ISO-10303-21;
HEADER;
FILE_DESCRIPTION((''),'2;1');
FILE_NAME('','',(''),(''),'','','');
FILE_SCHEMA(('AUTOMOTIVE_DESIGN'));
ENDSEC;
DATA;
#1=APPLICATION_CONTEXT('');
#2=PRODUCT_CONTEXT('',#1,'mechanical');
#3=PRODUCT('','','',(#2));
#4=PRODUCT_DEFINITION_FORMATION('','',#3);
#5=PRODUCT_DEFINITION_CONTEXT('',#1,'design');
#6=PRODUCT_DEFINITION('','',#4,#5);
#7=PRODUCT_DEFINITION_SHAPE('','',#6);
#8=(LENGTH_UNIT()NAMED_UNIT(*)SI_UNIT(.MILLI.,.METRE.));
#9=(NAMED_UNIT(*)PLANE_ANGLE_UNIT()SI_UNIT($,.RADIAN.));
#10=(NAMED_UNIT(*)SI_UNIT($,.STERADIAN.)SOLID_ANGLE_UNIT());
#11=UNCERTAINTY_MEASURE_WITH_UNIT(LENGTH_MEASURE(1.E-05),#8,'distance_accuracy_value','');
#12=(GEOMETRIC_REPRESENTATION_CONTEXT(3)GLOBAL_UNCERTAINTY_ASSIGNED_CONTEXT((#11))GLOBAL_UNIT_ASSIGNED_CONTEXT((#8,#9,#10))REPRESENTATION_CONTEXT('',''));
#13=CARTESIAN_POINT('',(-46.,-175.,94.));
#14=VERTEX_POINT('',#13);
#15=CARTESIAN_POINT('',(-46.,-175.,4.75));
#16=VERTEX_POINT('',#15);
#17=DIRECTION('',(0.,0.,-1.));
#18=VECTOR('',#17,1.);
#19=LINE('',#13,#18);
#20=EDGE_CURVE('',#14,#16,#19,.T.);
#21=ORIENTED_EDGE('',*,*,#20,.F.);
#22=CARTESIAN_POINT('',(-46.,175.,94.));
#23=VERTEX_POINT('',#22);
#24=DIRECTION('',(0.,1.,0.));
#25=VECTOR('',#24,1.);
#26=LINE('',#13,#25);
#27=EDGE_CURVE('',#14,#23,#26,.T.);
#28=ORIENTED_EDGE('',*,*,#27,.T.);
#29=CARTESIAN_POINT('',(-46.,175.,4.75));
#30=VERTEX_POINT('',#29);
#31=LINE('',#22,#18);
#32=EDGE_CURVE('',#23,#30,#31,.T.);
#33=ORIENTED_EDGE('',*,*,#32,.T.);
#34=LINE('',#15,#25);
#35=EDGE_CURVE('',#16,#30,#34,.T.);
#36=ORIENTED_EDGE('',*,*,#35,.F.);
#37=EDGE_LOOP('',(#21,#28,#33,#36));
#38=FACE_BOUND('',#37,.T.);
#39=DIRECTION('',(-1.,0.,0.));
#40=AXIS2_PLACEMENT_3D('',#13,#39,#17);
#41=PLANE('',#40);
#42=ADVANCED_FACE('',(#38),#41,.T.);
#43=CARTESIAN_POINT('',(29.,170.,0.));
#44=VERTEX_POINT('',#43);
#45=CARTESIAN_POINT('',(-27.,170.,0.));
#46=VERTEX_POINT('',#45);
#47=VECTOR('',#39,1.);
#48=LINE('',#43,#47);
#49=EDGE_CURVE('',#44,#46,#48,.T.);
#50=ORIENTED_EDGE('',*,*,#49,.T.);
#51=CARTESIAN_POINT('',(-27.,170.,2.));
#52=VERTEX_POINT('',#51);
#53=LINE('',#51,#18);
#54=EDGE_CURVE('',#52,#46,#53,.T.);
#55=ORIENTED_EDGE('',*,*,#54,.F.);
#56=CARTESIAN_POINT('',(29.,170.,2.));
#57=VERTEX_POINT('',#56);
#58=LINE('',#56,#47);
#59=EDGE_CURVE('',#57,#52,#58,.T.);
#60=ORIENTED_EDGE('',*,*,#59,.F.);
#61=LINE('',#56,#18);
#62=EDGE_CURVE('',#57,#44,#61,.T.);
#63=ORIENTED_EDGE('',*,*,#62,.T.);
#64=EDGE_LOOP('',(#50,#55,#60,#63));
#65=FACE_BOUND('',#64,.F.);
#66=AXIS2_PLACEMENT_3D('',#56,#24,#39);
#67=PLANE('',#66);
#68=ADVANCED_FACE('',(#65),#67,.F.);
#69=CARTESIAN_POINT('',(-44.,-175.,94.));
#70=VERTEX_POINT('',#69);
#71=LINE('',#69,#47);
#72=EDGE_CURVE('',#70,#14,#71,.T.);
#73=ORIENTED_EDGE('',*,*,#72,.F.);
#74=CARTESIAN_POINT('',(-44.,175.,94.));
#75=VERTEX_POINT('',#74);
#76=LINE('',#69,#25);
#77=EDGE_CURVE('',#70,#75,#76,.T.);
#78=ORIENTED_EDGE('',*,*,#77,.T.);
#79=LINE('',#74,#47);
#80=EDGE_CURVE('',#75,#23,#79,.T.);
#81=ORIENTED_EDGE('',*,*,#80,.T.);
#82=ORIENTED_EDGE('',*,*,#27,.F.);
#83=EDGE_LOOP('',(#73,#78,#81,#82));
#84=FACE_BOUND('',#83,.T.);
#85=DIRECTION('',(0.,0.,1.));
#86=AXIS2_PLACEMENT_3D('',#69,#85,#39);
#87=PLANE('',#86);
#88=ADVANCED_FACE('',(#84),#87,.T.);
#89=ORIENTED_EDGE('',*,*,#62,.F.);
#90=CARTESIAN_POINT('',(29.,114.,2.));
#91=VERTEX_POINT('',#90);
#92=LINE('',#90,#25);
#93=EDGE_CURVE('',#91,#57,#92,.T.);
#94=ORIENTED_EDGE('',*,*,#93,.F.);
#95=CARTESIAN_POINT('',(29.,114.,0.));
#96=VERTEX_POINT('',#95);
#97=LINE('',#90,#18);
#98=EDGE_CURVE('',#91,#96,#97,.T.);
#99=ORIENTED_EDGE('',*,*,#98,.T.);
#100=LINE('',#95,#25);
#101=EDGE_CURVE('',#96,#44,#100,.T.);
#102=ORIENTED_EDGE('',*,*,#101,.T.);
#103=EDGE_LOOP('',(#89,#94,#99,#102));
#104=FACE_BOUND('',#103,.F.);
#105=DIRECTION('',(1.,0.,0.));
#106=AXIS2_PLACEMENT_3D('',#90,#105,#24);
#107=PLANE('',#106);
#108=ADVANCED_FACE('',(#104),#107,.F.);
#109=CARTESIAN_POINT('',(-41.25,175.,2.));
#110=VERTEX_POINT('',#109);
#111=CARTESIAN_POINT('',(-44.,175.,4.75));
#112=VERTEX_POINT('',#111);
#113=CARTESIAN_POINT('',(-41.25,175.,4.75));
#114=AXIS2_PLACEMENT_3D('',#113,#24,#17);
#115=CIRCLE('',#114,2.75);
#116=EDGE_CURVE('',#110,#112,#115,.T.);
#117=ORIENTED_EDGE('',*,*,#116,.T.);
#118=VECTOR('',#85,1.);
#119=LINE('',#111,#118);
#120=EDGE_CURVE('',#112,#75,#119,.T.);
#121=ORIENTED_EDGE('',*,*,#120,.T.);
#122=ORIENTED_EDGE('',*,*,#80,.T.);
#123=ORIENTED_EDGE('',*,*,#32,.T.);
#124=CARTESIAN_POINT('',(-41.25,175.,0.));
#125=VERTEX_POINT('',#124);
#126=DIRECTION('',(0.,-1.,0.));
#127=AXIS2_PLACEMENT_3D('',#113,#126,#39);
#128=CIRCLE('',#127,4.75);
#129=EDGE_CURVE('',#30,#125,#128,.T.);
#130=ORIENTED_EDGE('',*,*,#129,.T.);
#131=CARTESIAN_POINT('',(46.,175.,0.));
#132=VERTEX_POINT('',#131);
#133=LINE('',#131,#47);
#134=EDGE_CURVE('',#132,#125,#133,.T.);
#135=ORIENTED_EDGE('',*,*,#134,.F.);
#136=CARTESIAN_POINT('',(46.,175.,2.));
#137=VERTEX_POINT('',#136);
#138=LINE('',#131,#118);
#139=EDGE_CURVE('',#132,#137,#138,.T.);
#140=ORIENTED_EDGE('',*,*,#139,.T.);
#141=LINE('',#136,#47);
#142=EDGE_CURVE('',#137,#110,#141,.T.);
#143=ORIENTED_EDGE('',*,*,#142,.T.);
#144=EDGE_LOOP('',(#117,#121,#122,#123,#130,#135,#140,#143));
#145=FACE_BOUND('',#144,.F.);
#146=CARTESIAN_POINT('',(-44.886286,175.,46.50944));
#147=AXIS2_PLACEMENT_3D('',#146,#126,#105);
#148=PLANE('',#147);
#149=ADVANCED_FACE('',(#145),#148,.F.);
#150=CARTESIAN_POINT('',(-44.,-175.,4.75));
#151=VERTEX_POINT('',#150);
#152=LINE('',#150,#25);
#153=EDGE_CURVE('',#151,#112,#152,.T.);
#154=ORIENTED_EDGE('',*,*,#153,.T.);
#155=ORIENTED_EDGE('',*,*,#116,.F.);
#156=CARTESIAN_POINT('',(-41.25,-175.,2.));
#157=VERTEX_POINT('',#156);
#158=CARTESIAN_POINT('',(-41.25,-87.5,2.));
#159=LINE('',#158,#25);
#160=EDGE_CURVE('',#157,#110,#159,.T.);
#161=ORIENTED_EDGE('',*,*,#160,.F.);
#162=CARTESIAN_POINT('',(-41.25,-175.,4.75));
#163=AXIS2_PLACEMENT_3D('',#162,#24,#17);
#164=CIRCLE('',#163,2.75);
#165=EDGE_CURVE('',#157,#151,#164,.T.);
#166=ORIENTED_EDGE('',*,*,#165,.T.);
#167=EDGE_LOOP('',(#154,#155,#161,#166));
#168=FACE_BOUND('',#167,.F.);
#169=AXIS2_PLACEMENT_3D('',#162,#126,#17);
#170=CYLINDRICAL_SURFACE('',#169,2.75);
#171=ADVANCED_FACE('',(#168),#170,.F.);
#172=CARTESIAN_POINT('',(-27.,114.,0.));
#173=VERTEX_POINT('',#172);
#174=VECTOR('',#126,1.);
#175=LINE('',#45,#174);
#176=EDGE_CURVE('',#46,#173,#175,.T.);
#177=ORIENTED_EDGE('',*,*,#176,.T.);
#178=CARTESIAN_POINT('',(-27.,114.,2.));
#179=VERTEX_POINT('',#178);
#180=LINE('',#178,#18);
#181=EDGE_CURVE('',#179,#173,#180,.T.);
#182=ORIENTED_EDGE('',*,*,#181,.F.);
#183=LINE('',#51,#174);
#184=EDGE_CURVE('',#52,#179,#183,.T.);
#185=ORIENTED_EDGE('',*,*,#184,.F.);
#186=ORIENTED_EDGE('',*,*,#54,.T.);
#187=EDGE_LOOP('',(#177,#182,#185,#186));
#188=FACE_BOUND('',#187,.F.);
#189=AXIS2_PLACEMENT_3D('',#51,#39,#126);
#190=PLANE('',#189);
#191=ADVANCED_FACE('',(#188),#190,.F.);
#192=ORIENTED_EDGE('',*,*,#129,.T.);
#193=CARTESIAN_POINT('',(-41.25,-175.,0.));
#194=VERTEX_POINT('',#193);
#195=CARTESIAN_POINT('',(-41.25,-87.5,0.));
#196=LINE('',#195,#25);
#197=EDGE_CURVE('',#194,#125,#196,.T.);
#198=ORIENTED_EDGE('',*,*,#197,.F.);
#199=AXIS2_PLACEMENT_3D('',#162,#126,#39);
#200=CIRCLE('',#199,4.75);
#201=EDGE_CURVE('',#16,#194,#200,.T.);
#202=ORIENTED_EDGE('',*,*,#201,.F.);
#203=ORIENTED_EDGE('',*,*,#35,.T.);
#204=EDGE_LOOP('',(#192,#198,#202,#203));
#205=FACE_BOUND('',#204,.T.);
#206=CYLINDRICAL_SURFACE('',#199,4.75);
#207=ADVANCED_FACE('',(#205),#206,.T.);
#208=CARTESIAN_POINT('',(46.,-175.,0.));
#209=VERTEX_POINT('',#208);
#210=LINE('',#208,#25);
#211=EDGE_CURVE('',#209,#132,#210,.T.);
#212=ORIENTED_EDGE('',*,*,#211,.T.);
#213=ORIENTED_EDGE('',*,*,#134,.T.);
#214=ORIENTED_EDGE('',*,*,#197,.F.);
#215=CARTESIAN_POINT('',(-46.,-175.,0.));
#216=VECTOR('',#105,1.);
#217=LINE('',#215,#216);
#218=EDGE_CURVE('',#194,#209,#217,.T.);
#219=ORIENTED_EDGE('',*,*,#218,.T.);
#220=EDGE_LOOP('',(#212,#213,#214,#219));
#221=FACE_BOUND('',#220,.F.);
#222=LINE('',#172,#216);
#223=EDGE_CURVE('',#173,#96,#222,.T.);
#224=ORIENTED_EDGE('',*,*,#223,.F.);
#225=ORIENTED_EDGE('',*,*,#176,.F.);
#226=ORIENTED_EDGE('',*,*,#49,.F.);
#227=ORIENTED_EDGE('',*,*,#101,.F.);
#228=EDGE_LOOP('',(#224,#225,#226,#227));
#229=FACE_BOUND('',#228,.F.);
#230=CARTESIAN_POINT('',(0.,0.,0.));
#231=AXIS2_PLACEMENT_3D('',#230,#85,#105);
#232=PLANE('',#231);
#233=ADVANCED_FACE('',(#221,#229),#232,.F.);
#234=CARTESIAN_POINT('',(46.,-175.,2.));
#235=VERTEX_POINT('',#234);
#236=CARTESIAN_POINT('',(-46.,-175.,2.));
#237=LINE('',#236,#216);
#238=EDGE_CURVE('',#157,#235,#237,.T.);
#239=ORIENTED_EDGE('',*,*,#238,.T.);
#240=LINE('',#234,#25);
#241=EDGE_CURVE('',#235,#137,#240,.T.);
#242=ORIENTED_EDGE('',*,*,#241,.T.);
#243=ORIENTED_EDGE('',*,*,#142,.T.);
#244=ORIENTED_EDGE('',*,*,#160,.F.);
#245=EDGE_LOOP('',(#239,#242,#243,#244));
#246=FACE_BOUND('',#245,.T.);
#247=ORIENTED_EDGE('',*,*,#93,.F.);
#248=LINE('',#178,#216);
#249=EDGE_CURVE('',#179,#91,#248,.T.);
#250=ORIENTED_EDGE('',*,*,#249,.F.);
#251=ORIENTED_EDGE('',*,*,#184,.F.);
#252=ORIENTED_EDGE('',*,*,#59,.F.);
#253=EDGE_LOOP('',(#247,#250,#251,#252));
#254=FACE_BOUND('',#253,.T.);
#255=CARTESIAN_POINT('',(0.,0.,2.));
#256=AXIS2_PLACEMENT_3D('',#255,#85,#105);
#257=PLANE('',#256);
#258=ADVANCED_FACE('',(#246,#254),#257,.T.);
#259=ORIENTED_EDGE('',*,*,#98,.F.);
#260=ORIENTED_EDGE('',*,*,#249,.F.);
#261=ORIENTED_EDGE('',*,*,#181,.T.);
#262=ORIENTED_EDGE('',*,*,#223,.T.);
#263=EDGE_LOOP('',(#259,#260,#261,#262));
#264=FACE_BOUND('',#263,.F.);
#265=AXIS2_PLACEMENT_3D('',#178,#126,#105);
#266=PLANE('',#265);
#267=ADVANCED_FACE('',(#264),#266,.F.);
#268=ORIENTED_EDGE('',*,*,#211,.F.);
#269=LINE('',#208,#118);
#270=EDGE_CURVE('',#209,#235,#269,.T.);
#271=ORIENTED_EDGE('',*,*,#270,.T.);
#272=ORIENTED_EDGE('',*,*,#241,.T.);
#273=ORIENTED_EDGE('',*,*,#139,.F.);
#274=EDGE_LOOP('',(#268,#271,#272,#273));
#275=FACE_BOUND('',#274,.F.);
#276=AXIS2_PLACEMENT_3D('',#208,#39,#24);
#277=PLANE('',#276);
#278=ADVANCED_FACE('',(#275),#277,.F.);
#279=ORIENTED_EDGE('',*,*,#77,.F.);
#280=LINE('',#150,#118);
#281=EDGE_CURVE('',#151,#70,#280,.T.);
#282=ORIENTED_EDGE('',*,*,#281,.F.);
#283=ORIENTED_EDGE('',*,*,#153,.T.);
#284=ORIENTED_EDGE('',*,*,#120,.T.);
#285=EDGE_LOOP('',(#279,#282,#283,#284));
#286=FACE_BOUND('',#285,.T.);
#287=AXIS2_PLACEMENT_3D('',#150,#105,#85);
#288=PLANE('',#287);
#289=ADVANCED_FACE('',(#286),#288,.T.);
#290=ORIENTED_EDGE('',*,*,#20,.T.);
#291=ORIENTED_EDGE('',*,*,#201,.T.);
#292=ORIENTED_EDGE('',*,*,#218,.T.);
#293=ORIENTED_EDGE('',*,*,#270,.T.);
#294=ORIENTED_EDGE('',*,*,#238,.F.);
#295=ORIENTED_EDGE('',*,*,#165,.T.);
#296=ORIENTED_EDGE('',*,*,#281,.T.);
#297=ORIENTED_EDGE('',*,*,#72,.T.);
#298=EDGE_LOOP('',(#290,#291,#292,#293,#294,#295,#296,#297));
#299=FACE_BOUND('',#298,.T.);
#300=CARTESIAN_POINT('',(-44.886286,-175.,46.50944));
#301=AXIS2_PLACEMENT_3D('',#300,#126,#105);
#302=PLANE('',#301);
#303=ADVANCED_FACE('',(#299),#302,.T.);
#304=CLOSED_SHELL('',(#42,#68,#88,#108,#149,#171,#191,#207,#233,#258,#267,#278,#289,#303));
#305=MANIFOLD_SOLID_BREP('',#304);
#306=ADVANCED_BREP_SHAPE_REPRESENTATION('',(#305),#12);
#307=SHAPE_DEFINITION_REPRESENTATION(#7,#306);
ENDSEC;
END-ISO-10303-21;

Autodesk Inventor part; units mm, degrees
ref_plane "YZ Plane" through (0, 0, 0) normal (1, 0, 0) x (0, 1, 0)
ref_plane "XZ Plane" through (0, 0, 0) normal (0, 1, 0) x (-1, 0, 0)
ref_plane "XY Plane" through (0, 0, 0) normal (0, 0, 1) x (1, 0, 0)
sketch "Sketch1" plane through (0, 0, 0) normal (0, 0, 1) x (1, 0, 0)
  line L0 (-46, -175) -> (46, -175)
  line L1 (46, -175) -> (46, 175)
  line L2 (46, 175) -> (-46, 175)
  line L3 (-46, 175) -> (-46, -175)
  line L4 (-46, -175) -> (46, 175) construction
  line L5 (46, -175) -> (-46, 175) construction
  point P0 (0, 0)
  dimension "d154" = 92
  dimension "d155" = 350
extrude "Plate5" add sketch "Sketch1" along normal blind 2
sketch "Sketch7" plane through (-44, -175, 0) normal (-1, 0, 0) x (0, -1, 0)
  line L0 (-350, 0) -> (0, 0)
  line L1 (0, 0) -> (0, 94)
  line L2 (0, 94) -> (-350, 94)
  line L3 (-350, 94) -> (-350, 0)
edge flange "Flange3" height 94 angle 90 thickness 2 bend radius 2.75 thickness toward (-1, 0, 0) relief round relief width 2 relief depth 1 edges at (-46, 0, 2) wall of the first edge with corners at (-44, 175, 0) (-44, -175, 0) (-44, -175, 94) (-44, 175, 94)
bend "Bend3"
corner "Corner3"
sketch "Sketch8" plane through (0, 0, 2) normal (0, 0, 1) x (1, 0, 0)
  line L0 (46, 175) -> (46, -175) projected
  line L1 (-41.25, 175) -> (46, 175) projected
  line L2 (29, 170) -> (-27, 170)
  line L3 (-27, 170) -> (-27, 114)
  line L4 (-27, 114) -> (29, 114)
  line L5 (29, 114) -> (29, 170)
  line L6 (29, 170) -> (-27, 114) construction
  line L7 (-27, 170) -> (29, 114) construction
  point P0 (0, 0)
  point P1 (1, 142)
  point P2 (2.375, 175)
  dimension "d167" = 56
  dimension "d168" = 56
  dimension "d169" = 5
  dimension "d172" = 17
extrude "Cut1" cut sketch "Sketch8" against normal blind 2
properties part number "PNS 752 FDS 1200 FLANGE 2" material "Stainless Steel"
